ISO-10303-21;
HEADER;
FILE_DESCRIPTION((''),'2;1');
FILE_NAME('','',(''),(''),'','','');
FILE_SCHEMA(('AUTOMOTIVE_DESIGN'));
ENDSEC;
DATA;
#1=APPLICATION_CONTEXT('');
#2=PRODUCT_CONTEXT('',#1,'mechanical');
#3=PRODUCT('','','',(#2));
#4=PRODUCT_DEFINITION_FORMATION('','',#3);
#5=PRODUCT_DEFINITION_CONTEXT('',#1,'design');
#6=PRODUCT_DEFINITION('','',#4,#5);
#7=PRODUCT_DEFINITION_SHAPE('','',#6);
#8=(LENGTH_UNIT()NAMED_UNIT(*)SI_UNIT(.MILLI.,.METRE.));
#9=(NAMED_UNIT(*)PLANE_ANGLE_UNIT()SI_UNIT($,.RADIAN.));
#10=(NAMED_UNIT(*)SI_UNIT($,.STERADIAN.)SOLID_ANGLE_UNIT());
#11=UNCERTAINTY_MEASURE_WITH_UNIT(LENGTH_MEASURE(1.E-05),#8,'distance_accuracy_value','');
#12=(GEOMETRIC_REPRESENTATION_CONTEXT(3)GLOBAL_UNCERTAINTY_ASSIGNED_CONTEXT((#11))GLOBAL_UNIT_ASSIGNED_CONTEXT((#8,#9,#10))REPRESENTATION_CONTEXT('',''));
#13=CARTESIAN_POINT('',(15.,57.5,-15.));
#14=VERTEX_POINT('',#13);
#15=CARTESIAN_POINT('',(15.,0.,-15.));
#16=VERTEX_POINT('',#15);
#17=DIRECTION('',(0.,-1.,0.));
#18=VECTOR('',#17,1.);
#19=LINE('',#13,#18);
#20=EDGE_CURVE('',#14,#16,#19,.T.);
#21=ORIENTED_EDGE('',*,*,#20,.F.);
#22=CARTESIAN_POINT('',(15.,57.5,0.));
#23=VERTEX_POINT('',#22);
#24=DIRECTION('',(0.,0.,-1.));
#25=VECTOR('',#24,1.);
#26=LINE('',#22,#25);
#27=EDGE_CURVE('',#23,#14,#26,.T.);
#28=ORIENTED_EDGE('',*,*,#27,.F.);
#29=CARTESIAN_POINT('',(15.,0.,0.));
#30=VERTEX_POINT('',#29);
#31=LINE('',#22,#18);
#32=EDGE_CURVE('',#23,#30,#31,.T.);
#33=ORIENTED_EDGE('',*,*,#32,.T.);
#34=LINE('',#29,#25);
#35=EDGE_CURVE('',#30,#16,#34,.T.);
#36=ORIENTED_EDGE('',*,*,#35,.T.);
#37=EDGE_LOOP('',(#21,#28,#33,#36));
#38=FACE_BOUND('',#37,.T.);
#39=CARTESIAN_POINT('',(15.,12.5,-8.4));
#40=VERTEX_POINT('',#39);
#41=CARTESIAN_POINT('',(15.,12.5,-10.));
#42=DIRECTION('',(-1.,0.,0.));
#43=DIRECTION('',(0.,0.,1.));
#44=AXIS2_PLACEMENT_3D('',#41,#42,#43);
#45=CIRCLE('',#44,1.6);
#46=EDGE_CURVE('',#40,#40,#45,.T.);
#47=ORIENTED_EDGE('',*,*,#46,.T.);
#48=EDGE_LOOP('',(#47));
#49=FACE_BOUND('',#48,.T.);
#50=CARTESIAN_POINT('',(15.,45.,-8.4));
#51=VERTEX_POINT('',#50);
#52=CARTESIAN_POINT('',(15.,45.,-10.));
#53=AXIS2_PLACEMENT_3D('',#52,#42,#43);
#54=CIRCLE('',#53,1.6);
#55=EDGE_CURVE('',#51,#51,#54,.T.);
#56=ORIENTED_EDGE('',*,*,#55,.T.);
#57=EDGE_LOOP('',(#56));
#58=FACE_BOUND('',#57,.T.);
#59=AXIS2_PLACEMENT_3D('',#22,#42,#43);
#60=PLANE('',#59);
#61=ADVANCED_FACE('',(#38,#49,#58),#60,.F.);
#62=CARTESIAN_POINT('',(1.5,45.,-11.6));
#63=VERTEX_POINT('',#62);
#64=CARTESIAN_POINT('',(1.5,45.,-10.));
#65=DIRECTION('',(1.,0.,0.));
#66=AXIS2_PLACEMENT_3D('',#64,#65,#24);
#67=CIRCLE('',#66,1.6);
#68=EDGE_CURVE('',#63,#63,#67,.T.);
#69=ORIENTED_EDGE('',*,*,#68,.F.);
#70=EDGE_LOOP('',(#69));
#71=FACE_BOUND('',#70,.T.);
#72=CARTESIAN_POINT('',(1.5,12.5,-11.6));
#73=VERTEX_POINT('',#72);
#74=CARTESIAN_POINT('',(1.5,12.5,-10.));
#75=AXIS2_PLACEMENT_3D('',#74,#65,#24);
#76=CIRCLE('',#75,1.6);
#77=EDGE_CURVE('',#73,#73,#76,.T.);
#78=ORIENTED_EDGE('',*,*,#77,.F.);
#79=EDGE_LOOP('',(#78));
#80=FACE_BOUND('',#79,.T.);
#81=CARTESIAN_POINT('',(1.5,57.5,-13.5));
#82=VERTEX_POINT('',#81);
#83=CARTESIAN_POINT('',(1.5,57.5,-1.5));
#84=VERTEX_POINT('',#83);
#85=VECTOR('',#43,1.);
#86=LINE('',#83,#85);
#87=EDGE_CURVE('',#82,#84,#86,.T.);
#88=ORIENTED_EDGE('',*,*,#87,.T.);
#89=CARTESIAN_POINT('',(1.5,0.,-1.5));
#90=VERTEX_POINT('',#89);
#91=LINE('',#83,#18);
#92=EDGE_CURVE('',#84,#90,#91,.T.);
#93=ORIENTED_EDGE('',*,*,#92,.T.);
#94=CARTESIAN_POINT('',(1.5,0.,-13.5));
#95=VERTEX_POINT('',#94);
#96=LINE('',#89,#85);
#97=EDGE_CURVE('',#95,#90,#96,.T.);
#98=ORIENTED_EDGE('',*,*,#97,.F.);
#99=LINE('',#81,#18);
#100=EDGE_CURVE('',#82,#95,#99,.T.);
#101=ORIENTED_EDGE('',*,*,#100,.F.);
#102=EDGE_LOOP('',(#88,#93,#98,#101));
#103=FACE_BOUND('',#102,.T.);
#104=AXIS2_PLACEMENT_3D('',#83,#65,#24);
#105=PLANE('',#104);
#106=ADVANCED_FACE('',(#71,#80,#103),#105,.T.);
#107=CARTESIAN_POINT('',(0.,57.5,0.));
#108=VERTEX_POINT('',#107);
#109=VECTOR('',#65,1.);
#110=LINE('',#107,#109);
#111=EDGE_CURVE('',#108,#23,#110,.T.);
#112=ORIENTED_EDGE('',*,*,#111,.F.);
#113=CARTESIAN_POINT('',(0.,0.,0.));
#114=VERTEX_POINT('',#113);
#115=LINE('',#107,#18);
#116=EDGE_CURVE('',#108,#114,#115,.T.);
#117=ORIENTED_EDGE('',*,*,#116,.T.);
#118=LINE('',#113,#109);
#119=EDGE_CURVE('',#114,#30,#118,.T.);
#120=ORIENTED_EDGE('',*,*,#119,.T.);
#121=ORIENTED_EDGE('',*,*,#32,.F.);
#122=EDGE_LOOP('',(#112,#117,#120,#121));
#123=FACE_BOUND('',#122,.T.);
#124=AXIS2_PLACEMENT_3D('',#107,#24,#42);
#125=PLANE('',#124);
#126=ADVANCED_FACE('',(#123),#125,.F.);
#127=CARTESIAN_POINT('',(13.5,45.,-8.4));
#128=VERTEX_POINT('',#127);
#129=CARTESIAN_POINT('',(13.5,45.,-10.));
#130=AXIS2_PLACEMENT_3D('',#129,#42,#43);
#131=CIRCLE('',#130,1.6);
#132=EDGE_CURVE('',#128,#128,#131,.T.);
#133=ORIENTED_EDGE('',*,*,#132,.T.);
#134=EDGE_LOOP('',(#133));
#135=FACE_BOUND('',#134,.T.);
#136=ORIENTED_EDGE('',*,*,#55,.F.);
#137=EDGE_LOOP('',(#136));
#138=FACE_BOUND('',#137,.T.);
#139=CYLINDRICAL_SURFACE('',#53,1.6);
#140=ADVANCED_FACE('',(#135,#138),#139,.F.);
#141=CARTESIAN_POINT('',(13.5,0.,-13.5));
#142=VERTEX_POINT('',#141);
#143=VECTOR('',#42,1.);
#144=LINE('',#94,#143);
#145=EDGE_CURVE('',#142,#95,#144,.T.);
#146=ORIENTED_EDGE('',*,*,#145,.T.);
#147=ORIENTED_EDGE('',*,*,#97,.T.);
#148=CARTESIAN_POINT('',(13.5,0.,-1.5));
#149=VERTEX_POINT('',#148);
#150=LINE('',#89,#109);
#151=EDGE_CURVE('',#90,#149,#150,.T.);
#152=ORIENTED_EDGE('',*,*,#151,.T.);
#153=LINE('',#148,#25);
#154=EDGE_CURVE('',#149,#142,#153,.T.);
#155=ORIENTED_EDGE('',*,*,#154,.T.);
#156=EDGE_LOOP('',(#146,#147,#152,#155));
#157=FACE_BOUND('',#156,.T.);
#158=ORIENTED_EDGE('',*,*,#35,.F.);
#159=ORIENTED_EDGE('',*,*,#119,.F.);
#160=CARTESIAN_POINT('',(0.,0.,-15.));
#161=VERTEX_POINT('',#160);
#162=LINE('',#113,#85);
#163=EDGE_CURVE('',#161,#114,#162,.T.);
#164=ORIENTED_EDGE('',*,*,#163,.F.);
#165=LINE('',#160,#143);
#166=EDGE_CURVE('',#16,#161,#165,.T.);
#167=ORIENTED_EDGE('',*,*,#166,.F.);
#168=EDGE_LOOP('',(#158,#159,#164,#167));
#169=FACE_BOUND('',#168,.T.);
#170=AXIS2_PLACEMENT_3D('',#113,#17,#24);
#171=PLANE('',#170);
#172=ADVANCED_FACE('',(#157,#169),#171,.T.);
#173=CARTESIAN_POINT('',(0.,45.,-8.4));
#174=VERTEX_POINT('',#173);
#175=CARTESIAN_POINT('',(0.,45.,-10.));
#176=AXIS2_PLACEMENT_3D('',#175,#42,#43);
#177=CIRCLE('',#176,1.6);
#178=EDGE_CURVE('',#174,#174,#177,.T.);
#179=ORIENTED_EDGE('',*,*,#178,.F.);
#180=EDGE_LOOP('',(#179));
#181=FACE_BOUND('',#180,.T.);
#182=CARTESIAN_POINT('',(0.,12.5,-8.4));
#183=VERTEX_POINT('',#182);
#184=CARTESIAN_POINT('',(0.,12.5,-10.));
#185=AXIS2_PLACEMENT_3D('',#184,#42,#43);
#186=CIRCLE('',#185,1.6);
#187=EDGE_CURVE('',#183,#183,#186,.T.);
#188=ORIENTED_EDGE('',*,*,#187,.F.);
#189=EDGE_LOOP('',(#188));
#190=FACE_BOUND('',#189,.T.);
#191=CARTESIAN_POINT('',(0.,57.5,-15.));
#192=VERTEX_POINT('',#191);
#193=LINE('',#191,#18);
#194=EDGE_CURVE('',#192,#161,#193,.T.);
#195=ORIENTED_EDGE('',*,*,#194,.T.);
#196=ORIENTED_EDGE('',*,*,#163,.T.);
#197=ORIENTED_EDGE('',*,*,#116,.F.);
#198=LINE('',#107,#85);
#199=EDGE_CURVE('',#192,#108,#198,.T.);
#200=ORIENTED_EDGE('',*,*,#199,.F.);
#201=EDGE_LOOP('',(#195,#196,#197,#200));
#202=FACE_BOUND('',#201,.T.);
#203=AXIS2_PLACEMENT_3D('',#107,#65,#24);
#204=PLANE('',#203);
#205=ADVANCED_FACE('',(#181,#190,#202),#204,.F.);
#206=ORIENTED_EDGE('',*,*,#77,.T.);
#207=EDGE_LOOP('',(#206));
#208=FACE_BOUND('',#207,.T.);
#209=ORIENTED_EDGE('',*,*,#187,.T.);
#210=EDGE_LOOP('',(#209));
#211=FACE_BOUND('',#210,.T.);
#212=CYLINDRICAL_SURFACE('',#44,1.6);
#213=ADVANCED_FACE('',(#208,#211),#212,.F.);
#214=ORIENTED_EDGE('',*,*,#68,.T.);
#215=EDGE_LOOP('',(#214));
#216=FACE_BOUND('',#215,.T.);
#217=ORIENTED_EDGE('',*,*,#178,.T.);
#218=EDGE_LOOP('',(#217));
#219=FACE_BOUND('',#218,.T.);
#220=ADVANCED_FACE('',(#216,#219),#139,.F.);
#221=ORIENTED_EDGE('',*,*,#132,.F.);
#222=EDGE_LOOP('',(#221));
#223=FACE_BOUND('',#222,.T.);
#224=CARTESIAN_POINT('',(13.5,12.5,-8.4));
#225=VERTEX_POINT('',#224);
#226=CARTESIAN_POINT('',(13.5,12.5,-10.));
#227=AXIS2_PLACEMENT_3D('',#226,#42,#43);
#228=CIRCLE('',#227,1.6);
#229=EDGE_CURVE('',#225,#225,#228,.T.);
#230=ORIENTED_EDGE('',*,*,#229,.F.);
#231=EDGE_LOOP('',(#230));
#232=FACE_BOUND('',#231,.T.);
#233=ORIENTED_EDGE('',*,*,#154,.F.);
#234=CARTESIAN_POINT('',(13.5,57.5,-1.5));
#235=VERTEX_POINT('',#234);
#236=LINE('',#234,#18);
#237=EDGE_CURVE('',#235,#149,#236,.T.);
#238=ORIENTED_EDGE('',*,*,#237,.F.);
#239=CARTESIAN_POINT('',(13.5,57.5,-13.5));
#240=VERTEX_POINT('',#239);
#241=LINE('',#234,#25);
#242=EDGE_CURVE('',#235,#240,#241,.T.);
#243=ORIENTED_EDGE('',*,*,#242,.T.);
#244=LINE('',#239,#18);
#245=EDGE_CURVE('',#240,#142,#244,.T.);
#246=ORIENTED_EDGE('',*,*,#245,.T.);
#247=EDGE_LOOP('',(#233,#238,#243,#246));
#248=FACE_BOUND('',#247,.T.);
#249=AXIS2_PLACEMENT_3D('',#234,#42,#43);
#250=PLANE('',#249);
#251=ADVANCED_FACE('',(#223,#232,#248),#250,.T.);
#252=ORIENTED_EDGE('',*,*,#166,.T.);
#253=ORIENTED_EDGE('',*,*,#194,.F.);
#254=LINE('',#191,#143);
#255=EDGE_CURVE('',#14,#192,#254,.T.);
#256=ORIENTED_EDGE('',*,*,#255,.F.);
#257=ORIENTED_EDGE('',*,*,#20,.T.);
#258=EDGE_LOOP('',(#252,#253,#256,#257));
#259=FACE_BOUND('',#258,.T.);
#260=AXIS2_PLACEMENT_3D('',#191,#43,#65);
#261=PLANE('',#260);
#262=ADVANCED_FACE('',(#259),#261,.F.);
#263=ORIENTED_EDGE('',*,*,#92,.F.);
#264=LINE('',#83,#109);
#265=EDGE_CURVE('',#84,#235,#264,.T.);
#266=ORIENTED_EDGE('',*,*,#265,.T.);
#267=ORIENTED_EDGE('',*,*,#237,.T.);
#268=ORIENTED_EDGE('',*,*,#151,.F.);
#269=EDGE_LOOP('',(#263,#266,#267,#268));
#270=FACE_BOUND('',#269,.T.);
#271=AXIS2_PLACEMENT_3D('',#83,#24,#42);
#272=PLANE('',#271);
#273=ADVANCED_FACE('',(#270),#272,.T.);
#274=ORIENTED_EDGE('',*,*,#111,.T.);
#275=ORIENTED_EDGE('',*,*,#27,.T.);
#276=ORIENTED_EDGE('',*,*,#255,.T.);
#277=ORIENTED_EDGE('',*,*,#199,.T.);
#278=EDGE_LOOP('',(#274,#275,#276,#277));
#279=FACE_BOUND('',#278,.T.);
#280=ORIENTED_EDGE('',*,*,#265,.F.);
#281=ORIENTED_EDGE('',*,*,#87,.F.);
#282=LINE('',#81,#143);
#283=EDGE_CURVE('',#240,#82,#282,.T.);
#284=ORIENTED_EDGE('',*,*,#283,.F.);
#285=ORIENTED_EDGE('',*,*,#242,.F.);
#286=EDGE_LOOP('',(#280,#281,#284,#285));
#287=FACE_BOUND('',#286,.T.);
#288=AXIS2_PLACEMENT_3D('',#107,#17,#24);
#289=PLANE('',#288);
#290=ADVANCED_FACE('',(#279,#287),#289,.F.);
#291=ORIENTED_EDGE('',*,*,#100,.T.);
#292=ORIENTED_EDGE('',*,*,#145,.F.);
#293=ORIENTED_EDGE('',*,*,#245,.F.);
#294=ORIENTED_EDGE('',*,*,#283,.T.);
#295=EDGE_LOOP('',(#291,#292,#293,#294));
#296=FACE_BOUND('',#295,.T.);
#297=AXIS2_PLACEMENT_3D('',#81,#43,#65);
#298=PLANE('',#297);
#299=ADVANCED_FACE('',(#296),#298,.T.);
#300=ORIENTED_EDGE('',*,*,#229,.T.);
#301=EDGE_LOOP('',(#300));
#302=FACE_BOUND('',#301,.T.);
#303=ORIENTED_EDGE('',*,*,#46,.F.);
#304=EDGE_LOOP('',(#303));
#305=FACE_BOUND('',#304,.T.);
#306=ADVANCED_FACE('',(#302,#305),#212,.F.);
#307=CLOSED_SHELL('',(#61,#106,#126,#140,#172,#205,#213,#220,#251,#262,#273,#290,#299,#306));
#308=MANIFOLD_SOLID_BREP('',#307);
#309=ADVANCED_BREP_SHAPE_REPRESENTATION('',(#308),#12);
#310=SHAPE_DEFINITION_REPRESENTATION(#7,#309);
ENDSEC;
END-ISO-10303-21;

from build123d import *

# Parameters (mm, degrees)
SKETCH_1_W              = 15
SKETCH_1_H              = 15
SKETCH_1_W_2            = 12
SKETCH_1_H_2            = 12
EXTRUDE_1_DEPTH         = 57.5
CUT_EXTRUDE_1_OUTLINE_R = 1.6
CUT_EXTRUDE_1_DEPTH     = 15


# Read off the part's stored shape, not the designer's step: 切除-拉伸1
with BuildPart() as part:
    # 草图1 → 凸台-拉伸1 (new body)
    with BuildSketch(Plane(origin=(0, 0, 0), x_dir=(1, 0, 0), z_dir=(0, 1, 0))):
        with Locations((7.5, 7.5)):
            Rectangle(SKETCH_1_W, SKETCH_1_H)
        with Locations((7.5, 7.5)):
            Rectangle(SKETCH_1_W_2, SKETCH_1_H_2, mode=Mode.SUBTRACT)
    extrude(amount=EXTRUDE_1_DEPTH)

    # 切除-拉伸1 outline → 切除-拉伸1 (cut)
    with BuildSketch(Plane.YZ):
        with Locations((45, -10)):
            Circle(CUT_EXTRUDE_1_OUTLINE_R)
        with Locations((12.5, -10)):
            Circle(CUT_EXTRUDE_1_OUTLINE_R)
    extrude(amount=CUT_EXTRUDE_1_DEPTH, mode=Mode.SUBTRACT)


solid = part.part
